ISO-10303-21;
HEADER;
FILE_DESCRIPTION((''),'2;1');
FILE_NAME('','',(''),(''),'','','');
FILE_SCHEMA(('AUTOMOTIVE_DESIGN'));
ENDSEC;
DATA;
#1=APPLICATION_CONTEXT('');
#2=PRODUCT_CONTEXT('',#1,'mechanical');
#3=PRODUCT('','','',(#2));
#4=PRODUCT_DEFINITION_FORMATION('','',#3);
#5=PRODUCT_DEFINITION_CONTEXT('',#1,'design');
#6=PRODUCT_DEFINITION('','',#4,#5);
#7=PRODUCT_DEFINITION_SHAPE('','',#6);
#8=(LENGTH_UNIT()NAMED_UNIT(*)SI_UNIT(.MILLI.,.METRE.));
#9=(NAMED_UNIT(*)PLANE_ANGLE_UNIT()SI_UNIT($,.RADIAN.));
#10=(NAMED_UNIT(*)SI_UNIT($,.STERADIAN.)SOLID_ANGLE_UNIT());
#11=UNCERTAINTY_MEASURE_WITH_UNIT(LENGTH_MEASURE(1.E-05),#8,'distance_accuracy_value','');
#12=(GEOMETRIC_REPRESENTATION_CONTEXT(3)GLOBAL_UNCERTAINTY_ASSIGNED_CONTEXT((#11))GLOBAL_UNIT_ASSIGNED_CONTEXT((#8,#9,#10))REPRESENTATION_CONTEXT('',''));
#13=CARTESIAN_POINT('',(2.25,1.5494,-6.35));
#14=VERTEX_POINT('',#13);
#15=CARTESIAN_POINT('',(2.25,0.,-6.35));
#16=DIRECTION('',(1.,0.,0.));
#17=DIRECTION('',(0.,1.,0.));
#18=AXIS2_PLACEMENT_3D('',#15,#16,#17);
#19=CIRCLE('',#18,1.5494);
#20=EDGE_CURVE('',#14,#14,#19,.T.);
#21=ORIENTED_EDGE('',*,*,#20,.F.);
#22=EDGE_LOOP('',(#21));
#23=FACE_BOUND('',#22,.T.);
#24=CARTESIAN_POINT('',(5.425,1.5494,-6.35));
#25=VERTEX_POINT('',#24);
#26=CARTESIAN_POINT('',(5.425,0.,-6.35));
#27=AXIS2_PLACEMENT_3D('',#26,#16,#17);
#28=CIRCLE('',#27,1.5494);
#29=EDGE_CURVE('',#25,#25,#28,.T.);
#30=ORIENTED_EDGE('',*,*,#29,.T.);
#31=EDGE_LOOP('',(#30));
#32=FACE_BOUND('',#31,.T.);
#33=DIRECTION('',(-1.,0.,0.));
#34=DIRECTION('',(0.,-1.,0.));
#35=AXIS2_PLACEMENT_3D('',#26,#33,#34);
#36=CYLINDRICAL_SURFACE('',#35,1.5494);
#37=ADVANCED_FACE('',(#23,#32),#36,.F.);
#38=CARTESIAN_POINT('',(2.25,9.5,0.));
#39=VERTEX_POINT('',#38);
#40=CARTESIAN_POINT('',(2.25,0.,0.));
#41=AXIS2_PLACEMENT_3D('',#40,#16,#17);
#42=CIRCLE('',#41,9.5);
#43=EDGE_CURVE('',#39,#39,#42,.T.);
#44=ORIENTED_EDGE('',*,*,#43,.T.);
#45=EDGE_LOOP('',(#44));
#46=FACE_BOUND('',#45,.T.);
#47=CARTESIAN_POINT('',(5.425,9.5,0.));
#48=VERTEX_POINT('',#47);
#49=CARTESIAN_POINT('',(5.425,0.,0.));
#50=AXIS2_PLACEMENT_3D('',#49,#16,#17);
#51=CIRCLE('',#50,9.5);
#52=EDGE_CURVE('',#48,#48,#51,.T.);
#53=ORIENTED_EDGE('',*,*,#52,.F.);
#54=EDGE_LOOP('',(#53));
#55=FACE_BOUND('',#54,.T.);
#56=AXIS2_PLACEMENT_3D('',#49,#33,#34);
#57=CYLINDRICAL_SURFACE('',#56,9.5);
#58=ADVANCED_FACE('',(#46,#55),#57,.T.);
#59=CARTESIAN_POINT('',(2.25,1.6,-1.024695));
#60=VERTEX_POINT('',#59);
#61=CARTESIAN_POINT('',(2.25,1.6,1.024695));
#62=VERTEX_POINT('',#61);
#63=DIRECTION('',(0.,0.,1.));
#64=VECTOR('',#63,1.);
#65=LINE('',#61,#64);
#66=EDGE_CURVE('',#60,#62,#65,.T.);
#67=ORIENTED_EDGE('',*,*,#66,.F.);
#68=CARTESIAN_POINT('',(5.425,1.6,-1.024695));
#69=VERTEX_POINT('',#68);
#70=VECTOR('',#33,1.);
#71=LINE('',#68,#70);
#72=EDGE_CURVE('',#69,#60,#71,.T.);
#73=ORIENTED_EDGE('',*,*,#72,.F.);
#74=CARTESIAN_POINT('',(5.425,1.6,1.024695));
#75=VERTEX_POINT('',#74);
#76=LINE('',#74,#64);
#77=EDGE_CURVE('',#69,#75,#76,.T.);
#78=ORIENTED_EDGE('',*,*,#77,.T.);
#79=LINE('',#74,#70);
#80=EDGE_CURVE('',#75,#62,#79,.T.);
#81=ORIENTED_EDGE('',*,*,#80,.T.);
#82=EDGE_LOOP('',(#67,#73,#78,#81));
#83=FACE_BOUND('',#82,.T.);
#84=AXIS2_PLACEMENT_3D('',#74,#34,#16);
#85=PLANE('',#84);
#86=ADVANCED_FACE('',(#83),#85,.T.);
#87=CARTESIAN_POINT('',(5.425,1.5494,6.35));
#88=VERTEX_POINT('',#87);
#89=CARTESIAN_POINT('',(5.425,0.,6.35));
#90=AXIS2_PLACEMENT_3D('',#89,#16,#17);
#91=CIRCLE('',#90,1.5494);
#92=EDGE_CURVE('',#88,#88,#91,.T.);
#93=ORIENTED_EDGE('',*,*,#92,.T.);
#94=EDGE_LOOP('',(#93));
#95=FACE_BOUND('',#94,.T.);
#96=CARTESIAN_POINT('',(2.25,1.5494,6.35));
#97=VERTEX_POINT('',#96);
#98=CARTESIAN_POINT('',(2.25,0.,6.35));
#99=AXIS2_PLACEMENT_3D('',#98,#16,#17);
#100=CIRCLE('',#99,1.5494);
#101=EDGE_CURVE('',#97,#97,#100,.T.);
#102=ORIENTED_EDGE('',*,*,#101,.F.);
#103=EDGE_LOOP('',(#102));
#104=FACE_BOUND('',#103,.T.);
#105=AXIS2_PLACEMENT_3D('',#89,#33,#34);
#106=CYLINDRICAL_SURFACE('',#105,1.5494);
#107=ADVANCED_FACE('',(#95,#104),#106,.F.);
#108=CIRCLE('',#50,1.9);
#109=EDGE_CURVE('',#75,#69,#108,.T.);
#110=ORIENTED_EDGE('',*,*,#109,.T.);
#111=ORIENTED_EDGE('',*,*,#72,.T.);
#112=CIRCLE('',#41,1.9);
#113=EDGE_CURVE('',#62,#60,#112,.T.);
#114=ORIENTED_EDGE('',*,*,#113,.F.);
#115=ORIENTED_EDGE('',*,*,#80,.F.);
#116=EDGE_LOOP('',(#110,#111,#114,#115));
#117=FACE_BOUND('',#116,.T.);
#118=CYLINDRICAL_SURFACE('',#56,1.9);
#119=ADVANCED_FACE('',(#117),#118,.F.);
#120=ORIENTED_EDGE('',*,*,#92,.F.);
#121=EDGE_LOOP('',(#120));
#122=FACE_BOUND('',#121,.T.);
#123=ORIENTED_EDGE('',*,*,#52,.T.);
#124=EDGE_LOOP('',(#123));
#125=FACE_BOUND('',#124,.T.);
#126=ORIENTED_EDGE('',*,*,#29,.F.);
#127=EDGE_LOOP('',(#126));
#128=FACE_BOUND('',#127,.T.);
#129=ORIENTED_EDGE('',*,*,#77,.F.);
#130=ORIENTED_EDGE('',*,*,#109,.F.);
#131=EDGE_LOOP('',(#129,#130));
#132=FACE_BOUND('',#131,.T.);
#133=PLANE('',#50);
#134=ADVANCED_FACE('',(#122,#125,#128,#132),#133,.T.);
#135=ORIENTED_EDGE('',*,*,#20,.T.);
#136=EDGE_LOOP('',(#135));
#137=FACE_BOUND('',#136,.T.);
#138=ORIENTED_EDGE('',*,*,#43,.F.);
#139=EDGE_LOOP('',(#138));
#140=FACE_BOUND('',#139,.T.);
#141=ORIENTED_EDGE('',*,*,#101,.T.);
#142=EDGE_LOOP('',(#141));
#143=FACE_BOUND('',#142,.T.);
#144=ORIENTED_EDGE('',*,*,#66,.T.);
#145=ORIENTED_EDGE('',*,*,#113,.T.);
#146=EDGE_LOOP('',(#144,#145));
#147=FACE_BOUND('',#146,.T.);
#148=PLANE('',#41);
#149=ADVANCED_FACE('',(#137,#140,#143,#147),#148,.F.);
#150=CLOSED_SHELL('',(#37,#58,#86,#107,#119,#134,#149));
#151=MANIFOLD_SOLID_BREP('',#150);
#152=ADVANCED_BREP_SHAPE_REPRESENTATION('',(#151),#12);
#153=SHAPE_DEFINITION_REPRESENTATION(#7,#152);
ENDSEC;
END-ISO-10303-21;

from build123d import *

# Parameters (mm, degrees)
SKETCH1_R           = 9.5
SKETCH1_R_2         = 1.5494
BOSS_EXTRUDE1_DEPTH = 3.175


# Read off the part's stored shape, not the designer's step: Imported1
with BuildPart() as part:
    # Sketch1 → Boss-Extrude1 (new body)
    with BuildSketch(Plane(origin=(2.25, 0, 0), x_dir=(0, 0, -1), z_dir=(1, 0, 0))):
        with Locations(Location((0, 0, 0), (0, 0, 90))):
            Circle(SKETCH1_R)
        with Locations(Location((-6.35, 0, 0), (0, 0, 90))):
            Circle(SKETCH1_R_2, mode=Mode.SUBTRACT)
        with Locations(Location((6.35, 0, 0), (0, 0, 90))):
            Circle(SKETCH1_R_2, mode=Mode.SUBTRACT)
        with BuildLine():
            Line((-1.024695077, 1.6), (1.024695077, 1.6))
            ThreePointArc((1.024695077, 1.6), (0, -1.9), (-1.024695077, 1.6))
        make_face(mode=Mode.SUBTRACT)
    extrude(amount=BOSS_EXTRUDE1_DEPTH)


solid = part.part
